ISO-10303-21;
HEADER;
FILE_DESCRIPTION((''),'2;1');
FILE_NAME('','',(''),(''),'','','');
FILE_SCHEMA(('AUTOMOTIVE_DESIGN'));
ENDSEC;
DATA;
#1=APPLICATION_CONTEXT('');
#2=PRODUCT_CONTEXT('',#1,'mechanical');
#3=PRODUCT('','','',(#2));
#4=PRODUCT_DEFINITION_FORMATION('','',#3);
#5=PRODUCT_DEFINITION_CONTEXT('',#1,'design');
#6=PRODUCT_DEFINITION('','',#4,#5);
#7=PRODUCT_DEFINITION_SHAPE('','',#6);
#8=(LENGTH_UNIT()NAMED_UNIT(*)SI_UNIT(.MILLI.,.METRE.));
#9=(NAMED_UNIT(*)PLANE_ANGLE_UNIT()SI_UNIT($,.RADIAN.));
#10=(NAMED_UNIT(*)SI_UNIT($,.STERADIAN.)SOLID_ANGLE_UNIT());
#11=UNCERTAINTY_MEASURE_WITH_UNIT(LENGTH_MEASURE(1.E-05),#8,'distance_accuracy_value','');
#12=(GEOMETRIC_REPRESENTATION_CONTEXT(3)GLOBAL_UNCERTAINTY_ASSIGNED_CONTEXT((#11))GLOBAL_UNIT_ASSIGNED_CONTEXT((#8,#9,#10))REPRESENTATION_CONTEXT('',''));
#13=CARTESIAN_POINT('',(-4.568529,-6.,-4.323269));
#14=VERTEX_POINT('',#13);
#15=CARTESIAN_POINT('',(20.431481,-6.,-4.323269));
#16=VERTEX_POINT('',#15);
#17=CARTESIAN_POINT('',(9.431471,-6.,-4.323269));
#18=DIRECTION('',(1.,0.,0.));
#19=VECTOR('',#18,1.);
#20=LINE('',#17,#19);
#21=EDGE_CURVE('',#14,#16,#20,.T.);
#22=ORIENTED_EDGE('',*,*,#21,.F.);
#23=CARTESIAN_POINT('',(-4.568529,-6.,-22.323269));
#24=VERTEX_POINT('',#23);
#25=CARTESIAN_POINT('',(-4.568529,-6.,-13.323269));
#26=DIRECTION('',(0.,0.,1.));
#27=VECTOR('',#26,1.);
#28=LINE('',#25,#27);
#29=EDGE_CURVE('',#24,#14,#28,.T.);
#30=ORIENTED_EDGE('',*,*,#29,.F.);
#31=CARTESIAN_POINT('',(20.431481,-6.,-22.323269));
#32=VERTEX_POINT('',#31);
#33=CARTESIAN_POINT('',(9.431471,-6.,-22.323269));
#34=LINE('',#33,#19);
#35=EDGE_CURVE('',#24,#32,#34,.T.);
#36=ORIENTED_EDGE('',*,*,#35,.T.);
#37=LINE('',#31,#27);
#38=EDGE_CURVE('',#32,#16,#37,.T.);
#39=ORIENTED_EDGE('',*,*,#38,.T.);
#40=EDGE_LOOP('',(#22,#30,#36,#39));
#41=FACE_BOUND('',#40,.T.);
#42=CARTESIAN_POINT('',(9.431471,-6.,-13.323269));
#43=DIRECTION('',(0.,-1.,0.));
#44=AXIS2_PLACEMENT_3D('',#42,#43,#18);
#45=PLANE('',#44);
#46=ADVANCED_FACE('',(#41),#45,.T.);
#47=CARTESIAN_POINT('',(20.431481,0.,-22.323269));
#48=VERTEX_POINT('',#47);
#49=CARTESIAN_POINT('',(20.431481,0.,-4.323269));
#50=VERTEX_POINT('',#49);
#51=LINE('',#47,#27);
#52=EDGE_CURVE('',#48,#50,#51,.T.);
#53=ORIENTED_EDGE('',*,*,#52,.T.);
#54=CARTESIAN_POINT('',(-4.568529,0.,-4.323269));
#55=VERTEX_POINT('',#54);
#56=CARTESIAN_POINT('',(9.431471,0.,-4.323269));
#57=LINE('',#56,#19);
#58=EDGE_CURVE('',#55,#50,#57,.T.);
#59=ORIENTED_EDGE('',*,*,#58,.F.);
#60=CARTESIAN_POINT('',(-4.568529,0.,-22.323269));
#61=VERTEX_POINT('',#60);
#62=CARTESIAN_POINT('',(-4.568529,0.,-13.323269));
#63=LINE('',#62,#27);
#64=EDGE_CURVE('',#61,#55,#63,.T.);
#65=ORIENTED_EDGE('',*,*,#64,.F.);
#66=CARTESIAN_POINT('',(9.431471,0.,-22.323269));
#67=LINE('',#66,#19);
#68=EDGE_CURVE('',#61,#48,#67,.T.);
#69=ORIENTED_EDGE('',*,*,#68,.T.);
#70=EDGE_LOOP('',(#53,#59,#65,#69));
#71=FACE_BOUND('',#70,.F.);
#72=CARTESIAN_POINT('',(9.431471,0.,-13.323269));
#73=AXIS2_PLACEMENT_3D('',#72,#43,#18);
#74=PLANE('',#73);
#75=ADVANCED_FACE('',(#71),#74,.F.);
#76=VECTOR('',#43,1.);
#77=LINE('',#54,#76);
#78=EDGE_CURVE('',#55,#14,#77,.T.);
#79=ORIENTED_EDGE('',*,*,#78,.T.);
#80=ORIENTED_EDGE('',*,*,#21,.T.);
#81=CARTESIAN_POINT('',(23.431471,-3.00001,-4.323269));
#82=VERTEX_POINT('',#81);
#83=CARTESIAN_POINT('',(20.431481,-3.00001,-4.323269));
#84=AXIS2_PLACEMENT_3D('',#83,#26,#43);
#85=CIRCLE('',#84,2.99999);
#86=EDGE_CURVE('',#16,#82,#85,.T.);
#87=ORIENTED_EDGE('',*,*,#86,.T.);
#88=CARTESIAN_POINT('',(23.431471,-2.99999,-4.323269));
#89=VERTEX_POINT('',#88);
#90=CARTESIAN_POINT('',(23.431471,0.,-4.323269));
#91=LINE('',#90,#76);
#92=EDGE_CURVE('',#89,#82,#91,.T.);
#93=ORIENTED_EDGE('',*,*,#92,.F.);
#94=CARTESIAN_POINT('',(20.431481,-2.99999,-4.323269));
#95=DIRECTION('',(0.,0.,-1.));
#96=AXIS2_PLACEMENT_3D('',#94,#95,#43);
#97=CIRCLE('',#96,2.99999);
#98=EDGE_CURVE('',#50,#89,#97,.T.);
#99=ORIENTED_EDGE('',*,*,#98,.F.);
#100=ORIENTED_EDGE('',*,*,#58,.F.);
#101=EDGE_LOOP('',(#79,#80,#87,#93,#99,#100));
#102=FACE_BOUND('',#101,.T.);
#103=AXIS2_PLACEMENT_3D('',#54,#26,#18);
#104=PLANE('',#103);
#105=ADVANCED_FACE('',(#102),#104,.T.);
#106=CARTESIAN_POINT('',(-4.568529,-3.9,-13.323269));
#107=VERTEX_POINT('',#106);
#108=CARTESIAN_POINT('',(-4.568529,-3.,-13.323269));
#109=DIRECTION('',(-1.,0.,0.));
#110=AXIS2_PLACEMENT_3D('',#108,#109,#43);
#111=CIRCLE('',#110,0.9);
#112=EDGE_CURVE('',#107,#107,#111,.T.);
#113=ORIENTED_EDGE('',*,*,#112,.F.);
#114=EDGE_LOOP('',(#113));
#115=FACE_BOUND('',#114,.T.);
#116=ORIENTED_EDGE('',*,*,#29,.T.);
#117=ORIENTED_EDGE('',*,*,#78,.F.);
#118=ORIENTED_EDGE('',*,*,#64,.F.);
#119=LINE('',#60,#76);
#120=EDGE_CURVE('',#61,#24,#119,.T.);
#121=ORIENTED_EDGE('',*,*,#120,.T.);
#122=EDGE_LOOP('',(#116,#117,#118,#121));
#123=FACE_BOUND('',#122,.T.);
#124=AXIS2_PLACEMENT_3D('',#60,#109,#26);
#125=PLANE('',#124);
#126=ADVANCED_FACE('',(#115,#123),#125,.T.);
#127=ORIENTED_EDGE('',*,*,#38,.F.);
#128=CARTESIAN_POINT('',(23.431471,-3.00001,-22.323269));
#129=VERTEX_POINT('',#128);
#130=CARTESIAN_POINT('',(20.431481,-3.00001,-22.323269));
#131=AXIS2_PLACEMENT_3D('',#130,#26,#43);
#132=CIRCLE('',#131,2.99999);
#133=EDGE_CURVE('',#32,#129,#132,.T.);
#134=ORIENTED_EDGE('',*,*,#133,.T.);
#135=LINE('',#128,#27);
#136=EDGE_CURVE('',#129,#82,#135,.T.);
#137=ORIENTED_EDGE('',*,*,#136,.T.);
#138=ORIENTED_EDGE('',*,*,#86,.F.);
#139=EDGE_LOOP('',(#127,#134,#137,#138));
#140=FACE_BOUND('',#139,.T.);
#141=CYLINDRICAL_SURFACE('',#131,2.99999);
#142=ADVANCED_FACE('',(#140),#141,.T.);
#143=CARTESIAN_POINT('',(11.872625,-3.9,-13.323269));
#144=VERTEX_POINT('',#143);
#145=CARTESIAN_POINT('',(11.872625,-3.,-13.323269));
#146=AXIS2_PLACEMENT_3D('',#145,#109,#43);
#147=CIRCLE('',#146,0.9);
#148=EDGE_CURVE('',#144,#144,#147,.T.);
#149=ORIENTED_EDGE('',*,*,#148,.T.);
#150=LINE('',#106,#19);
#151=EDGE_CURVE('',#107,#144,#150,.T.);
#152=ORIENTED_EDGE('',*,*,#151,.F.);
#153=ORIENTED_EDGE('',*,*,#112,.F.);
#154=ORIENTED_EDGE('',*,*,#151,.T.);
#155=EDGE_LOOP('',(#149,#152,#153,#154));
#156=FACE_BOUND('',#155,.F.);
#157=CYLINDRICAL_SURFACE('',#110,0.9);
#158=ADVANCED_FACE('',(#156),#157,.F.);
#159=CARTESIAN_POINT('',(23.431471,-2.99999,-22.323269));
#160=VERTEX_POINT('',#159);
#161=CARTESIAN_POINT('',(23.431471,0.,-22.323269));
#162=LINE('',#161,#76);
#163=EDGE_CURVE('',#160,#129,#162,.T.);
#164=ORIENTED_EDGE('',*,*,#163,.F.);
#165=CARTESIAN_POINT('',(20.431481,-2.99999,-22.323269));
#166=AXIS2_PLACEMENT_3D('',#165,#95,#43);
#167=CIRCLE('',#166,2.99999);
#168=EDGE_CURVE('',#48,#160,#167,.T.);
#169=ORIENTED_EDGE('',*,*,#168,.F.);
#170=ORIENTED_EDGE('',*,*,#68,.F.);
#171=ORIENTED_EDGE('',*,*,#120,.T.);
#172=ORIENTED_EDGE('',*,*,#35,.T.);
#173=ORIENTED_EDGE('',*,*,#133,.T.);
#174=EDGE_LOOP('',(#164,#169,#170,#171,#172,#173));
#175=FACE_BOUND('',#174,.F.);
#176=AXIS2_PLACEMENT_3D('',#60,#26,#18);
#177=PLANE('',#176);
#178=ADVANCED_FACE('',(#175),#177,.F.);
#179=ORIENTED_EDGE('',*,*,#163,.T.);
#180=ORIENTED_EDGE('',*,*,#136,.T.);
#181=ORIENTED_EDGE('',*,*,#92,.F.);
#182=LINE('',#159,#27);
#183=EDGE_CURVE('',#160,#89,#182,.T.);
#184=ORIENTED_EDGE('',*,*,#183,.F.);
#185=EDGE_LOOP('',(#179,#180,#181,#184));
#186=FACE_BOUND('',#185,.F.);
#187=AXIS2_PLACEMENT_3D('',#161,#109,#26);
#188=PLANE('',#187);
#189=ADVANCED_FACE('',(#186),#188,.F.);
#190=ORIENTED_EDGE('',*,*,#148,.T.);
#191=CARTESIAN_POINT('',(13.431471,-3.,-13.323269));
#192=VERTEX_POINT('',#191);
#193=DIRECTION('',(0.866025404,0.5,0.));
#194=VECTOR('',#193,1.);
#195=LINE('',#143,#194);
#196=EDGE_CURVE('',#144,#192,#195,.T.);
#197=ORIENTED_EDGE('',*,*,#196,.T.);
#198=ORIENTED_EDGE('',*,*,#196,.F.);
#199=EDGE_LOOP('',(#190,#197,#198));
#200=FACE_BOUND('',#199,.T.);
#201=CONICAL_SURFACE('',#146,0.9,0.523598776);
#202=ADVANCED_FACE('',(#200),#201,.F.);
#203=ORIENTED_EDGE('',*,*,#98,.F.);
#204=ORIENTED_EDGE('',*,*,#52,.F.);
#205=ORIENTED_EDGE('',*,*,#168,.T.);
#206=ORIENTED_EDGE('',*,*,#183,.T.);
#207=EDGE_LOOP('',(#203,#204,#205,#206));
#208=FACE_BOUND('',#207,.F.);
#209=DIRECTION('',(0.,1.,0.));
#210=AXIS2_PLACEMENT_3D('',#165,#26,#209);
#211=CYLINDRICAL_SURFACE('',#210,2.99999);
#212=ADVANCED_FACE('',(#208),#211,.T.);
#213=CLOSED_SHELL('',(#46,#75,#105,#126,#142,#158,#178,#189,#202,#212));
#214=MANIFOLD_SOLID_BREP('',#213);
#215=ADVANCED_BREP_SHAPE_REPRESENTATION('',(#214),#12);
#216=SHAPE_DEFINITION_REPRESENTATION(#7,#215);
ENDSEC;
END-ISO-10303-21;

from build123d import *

# Parameters (mm, degrees)
F0_W     = 28
F0_H     = 18
F1_DEPTH = 6
F2_R     = 0.9
F3_DEPTH = 18
F4_R     = 2.99999
F5_SIZE2 = 0.9
F5_SIZE  = 1.5588457268


# Not quite as in the source:
# - a fillet or chamfer is up to 0.001 mm smaller than in the source, because OpenCascade refuses the exact size


with BuildPart() as f1:
    # F0 (on Front) → F1 (new body)
    with BuildSketch(Plane.XZ):
        with Locations((9.4314706177, -13.323269397)):
            Rectangle(F0_W, F0_H)
    extrude(amount=F1_DEPTH)

    # F2 (on face) → F3 (cut)
    with BuildSketch(Plane(origin=(-4.5685293823, 0, 0), x_dir=(0, -1, 0), z_dir=(-1, 0, 0))):
        with Locations((3, -13.323269397)):
            Circle(F2_R)
    extrude(amount=-F3_DEPTH, mode=Mode.SUBTRACT)

    # F4 (radius 3 in the source; OpenCascade refuses exactly that, so slightly less here)
    f4_edges = [f1.edges().sort_by_distance(p)[0] for p in [
        (23.431471, -6, -13.323269),
        (23.431471, 0, -13.323269),
    ]]
    fillet(f4_edges, radius=F4_R)

    # F5
    f5_edges = [f1.edges().sort_by_distance(p)[0] for p in [
        (13.431471, -2.1, -13.323269),
    ]]
    f5_side = f1.faces().sort_by_distance((4.431471, -2.1, -13.323269))[0]
    chamfer(f5_edges, length=F5_SIZE, length2=F5_SIZE2, reference=f5_side)


solid = f1.part
